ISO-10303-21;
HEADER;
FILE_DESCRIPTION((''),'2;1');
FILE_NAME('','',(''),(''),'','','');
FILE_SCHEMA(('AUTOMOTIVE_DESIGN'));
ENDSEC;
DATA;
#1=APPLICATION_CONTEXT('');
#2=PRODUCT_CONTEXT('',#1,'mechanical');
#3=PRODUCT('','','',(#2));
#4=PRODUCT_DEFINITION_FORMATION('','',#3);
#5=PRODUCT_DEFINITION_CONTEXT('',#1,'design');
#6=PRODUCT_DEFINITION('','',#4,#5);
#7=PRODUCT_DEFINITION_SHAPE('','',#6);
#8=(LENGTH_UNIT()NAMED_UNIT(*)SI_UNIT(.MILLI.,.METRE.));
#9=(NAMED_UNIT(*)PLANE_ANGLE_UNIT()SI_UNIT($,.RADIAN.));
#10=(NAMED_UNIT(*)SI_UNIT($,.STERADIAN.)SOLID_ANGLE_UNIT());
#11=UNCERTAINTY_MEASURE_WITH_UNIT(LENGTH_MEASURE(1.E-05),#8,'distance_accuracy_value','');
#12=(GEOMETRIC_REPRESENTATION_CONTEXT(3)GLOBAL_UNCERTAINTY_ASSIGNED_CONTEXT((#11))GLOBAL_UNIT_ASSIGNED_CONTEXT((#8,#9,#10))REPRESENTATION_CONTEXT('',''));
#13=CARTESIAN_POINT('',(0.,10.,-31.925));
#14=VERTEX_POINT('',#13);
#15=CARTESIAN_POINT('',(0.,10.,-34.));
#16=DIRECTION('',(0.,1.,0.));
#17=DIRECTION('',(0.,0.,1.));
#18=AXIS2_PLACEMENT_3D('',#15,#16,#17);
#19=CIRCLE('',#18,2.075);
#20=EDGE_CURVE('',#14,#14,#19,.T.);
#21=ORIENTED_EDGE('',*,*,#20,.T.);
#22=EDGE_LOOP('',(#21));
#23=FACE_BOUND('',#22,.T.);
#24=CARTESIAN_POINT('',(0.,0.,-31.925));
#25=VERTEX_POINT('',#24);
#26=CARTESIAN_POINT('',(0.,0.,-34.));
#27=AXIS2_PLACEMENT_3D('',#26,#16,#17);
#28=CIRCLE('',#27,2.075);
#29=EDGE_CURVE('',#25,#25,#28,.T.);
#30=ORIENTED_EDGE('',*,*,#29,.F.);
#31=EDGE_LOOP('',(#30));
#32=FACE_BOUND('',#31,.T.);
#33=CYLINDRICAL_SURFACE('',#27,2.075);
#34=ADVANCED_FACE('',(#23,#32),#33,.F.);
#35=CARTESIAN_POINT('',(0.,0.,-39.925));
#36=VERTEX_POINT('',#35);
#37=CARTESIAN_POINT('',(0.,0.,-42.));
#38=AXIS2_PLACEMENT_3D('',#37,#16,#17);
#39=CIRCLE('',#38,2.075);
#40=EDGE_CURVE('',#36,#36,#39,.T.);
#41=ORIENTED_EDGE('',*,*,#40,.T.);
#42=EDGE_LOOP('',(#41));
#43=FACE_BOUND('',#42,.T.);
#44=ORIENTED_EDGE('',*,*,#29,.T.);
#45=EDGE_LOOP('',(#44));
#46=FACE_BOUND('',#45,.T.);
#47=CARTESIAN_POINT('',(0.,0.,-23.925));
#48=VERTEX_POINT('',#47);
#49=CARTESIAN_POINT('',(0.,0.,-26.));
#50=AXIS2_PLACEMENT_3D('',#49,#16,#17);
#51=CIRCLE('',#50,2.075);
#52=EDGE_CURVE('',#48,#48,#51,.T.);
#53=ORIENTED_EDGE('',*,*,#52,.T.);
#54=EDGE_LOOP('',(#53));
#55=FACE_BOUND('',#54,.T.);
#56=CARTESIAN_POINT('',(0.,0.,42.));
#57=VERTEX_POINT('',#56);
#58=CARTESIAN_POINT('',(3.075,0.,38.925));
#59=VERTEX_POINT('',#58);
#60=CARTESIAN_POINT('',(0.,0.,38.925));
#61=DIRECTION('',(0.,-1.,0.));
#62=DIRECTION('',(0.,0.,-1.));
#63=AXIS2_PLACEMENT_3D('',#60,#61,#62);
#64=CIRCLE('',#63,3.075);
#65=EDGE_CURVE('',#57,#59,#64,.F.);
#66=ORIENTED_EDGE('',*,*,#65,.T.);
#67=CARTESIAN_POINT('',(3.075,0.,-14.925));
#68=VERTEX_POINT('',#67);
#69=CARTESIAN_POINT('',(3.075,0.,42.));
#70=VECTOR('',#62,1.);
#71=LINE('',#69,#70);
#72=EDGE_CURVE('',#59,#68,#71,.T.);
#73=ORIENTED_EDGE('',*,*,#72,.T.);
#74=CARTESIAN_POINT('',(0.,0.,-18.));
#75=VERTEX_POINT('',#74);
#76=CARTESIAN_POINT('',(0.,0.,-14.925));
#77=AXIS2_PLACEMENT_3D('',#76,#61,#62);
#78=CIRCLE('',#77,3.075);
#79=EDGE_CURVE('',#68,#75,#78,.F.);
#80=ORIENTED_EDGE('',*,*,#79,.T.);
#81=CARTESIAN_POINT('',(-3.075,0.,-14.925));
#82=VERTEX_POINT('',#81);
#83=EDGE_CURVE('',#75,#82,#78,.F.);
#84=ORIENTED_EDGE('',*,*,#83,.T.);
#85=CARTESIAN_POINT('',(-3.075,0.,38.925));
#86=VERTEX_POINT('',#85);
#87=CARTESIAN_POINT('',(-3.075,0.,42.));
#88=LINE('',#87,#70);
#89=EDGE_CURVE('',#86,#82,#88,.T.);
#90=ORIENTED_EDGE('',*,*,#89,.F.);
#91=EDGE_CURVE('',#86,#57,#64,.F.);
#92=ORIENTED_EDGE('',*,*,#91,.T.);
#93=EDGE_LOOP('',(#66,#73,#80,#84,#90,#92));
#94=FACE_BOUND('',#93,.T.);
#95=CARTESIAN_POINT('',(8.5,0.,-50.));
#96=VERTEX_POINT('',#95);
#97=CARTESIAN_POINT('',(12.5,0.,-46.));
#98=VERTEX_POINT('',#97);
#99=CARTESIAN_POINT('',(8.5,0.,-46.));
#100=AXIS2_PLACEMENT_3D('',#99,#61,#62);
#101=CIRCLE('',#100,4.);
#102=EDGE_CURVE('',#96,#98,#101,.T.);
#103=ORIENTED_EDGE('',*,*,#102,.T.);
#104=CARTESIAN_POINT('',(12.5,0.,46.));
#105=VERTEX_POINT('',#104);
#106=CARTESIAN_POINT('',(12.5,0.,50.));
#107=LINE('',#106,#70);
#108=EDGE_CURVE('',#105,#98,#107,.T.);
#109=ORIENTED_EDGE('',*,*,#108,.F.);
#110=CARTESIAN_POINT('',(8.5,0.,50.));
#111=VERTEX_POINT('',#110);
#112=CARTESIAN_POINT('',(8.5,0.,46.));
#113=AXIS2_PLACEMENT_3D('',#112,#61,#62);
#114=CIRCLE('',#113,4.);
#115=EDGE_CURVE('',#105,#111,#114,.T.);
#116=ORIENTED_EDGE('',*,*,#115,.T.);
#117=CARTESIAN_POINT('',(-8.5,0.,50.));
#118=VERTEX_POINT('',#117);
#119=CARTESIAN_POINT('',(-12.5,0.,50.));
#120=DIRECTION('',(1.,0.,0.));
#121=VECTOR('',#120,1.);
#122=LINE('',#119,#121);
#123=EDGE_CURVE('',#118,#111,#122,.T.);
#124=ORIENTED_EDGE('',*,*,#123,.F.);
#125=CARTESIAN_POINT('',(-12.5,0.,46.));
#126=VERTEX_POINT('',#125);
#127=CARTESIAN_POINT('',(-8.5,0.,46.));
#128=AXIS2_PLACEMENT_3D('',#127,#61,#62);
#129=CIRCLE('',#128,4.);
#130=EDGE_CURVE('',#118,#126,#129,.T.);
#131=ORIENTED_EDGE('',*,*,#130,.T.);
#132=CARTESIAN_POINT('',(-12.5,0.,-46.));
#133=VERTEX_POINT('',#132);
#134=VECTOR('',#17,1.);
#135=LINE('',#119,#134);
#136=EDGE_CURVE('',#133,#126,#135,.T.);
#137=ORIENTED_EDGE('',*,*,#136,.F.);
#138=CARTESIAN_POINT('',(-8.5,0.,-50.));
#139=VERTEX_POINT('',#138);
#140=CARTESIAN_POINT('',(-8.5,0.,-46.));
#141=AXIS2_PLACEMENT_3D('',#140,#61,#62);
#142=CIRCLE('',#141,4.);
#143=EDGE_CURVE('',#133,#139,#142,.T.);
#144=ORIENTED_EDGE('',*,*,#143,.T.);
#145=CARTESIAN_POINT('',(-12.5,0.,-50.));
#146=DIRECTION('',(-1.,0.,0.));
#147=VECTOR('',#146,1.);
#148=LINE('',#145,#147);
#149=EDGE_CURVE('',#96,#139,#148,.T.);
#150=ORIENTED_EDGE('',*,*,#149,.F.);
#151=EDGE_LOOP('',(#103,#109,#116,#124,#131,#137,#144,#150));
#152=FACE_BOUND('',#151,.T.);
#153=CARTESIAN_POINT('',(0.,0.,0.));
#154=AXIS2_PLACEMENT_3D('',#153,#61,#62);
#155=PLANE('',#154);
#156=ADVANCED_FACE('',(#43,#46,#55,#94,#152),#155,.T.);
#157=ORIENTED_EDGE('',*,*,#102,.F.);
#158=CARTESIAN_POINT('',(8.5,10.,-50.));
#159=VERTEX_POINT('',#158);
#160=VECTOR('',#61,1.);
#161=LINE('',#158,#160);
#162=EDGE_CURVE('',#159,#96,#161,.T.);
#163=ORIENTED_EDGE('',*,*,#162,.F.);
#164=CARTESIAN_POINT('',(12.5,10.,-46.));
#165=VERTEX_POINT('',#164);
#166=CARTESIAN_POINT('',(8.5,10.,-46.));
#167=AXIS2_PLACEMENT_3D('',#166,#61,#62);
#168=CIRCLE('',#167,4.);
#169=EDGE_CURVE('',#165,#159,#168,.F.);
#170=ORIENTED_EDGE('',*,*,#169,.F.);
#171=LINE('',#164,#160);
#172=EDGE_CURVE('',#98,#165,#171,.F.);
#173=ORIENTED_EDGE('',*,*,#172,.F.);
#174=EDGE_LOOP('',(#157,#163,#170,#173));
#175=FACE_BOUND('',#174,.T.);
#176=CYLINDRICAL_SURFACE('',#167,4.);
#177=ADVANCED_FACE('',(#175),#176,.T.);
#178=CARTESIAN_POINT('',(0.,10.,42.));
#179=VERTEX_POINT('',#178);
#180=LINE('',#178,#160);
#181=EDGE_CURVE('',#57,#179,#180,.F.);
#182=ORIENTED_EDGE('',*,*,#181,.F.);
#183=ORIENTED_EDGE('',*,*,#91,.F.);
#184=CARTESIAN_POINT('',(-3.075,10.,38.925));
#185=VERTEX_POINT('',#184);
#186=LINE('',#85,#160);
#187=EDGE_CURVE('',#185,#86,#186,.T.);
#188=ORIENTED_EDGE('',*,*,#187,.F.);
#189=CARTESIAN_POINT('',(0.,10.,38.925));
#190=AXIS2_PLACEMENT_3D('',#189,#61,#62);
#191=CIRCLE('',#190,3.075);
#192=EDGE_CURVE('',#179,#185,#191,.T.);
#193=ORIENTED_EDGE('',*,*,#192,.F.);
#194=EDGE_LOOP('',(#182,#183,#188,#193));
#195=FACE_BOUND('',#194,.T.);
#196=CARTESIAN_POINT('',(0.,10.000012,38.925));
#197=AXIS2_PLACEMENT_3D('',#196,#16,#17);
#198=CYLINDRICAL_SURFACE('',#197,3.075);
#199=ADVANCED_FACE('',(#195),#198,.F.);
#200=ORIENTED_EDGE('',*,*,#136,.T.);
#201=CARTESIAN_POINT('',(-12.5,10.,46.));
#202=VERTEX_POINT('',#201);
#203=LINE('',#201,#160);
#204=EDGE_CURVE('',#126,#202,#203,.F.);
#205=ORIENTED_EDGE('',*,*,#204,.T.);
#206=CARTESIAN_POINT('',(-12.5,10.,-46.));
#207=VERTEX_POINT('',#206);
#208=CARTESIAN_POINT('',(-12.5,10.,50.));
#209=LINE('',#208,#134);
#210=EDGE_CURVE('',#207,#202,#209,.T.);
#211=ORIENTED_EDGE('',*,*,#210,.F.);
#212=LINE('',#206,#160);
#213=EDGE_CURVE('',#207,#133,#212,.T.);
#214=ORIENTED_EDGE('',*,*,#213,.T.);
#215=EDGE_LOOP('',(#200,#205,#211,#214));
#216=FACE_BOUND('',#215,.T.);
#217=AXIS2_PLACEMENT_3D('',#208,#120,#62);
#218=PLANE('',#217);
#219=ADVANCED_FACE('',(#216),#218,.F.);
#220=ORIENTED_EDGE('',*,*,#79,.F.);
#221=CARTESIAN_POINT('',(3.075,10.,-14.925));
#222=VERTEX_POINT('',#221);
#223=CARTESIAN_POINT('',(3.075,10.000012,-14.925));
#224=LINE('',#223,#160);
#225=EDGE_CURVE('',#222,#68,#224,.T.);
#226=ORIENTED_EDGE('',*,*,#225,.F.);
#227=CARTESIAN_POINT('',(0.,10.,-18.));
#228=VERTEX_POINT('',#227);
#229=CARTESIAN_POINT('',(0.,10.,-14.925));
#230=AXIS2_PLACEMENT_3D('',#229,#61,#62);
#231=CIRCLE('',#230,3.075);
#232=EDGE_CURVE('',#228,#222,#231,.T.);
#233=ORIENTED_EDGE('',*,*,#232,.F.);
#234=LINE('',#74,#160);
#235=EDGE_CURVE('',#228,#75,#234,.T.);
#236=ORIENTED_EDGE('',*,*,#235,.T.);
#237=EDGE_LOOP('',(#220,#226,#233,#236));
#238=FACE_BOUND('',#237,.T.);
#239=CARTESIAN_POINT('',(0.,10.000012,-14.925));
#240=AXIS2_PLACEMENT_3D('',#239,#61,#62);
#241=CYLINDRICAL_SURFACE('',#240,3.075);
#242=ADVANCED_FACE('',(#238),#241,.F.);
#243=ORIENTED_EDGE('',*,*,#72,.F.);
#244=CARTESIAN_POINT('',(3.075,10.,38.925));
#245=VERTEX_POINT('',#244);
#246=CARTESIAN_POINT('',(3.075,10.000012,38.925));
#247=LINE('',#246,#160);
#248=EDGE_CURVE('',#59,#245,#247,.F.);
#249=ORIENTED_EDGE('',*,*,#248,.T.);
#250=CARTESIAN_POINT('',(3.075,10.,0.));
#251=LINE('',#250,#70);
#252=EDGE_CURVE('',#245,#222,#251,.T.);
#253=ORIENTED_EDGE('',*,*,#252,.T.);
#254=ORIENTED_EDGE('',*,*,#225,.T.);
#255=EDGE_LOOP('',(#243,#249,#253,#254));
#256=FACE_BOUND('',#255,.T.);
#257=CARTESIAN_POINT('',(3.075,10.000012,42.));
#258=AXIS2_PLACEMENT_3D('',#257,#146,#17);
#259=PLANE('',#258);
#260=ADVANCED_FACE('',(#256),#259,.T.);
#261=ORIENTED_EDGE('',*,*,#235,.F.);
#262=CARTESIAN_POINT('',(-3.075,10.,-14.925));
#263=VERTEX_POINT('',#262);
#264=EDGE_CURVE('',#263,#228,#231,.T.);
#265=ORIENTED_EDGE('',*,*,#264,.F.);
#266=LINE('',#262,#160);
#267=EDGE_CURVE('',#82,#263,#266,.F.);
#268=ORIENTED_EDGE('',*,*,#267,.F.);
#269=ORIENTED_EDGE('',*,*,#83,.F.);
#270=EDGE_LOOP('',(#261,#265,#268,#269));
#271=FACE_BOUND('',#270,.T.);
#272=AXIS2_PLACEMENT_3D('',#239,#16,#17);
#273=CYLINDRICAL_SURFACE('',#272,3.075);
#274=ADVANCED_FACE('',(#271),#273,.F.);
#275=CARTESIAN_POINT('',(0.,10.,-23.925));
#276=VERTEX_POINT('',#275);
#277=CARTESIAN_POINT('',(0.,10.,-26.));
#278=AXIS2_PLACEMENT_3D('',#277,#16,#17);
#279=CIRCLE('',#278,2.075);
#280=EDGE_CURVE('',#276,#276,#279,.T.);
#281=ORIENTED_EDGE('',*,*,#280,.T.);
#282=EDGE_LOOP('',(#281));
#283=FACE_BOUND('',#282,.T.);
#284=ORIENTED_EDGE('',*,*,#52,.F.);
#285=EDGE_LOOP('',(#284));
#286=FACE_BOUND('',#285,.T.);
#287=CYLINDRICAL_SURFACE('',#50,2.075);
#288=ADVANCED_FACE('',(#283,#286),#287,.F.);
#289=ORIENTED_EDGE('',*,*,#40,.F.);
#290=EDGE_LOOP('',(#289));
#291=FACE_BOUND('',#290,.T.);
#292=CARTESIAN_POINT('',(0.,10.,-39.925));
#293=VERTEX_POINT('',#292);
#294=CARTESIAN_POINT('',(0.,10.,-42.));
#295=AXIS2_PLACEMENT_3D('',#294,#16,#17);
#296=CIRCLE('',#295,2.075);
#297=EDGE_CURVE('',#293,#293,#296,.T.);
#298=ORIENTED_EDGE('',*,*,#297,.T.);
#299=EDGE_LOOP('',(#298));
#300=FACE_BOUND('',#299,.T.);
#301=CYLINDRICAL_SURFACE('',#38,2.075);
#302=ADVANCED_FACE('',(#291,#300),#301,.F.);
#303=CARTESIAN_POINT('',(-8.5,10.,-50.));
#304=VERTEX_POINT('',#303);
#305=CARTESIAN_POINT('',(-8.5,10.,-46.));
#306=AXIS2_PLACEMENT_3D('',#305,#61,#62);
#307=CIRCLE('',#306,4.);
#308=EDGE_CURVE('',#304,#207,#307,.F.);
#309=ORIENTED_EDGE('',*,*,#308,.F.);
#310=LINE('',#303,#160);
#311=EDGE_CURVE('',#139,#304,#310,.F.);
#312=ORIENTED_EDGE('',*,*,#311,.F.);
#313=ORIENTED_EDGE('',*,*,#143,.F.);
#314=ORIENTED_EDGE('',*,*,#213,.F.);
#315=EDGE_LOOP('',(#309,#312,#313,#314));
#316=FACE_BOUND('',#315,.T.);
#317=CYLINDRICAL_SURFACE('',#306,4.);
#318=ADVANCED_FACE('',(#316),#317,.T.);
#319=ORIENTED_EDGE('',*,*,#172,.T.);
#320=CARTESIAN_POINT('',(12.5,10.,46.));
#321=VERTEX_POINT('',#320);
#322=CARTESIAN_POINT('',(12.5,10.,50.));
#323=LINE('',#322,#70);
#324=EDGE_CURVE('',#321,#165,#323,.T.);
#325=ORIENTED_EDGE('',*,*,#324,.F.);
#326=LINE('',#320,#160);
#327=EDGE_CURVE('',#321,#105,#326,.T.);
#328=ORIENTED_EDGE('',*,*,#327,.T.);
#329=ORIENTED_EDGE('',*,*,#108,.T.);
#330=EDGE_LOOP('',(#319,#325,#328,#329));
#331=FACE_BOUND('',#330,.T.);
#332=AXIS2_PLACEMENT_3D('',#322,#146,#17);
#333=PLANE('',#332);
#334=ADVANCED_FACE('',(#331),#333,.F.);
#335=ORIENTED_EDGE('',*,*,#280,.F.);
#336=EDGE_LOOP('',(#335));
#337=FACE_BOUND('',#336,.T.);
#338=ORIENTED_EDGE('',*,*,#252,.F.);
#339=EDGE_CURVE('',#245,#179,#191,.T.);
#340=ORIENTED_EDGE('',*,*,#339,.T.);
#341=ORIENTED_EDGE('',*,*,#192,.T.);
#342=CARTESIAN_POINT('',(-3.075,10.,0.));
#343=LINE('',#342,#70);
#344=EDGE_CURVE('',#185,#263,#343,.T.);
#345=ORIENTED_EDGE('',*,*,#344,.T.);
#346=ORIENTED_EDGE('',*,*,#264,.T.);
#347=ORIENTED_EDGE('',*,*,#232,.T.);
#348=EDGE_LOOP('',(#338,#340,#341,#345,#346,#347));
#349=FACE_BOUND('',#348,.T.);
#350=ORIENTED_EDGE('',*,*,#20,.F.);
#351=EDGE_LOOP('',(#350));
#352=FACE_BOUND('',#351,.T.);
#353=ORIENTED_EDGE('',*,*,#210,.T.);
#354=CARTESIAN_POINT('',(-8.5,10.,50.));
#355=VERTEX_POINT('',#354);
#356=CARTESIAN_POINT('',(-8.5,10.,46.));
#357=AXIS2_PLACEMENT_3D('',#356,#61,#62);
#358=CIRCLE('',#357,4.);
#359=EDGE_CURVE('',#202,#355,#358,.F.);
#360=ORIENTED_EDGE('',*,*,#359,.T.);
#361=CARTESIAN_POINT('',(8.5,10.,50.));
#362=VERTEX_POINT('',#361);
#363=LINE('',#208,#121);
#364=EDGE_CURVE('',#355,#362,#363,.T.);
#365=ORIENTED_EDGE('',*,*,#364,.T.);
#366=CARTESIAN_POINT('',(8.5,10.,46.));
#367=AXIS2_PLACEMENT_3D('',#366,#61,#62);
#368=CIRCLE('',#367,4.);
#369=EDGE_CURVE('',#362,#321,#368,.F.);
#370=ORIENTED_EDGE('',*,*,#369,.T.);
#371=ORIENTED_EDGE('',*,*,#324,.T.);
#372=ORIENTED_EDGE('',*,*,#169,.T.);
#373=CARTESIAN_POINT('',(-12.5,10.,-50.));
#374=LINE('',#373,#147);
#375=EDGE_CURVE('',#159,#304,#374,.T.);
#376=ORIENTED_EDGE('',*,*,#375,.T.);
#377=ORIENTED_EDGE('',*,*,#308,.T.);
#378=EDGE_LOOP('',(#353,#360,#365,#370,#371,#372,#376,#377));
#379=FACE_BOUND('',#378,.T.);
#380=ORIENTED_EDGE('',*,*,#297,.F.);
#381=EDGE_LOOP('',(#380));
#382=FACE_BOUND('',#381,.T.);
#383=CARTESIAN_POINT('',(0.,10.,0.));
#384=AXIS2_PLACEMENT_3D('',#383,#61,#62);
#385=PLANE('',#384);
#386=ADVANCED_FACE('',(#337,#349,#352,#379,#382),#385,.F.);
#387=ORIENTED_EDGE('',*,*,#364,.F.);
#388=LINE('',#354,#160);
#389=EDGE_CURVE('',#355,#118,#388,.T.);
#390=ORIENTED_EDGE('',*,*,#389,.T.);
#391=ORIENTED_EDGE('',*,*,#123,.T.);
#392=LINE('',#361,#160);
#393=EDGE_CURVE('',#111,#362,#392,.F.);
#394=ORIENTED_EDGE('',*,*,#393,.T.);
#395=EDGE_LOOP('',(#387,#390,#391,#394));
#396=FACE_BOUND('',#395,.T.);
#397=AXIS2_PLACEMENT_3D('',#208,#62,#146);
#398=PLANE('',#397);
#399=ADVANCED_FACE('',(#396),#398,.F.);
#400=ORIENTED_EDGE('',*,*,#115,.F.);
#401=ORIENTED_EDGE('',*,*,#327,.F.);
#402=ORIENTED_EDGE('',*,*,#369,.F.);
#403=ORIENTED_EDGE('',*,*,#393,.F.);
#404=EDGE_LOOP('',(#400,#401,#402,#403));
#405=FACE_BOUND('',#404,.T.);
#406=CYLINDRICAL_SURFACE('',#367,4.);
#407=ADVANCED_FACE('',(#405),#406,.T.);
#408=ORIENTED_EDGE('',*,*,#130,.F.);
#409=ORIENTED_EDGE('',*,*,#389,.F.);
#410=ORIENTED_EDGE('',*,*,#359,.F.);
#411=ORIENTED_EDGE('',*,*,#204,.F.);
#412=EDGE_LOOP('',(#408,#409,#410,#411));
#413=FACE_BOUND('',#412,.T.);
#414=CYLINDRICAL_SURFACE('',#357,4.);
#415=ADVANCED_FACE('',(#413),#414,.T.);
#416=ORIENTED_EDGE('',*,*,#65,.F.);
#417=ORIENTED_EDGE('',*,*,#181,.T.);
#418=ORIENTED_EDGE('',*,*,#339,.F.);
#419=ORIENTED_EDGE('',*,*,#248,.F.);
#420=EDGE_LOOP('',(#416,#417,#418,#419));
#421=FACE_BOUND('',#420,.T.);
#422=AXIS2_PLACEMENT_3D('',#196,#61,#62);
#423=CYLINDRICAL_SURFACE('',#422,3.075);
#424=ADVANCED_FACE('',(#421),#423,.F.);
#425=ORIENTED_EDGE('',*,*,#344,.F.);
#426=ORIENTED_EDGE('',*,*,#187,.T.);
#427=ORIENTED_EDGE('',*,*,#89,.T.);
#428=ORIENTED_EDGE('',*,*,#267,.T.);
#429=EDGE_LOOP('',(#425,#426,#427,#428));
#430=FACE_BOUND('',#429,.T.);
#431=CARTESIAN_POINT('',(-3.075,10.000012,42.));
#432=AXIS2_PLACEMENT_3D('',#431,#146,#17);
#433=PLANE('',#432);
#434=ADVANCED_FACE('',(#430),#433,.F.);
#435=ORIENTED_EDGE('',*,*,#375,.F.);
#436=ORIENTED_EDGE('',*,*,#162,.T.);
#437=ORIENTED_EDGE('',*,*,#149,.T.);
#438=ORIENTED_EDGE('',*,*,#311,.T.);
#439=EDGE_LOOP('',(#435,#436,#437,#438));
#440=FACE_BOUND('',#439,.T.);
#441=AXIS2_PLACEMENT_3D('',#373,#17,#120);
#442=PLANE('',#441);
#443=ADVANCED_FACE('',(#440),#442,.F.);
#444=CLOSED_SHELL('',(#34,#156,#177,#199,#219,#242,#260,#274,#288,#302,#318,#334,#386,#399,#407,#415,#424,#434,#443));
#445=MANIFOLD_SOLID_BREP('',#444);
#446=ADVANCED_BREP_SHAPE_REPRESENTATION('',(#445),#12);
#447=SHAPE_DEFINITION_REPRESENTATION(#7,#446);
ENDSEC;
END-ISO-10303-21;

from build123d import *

# Parameters (mm, degrees)
SKETCH1_W                    = 25
SKETCH1_H                    = 100
BOSS_EXTRUDE1_DEPTH          = 10
CUT_EXTRUDE_THIN2_DEPTH      = 53.5
CUT_EXTRUDE_THIN2_DEPTH_BACK = 10
SKETCH3_W                    = 6.15
SKETCH3_H                    = 60
FILLET2_R                    = 3.075
FILLET3_R                    = 4
SKETCH4_R                    = 2.075
CUT_EXTRUDE1_DEPTH           = 53.5
LPATTERN1_COUNT              = 3
LPATTERN1_PITCH              = 8


with BuildPart() as part:
    # Sketch1 → Boss-Extrude1 (new body)
    with BuildSketch(Plane(origin=(0, 0, 0), x_dir=(1, 0, 0), z_dir=(0, 1, 0))):
        Rectangle(SKETCH1_W, SKETCH1_H)
    extrude(amount=BOSS_EXTRUDE1_DEPTH)

    # Sketch3 → Cut-Extrude-Thin2 (cut, two sides: drawn at the far end of the back side and taken through both)
    with BuildSketch(Plane(origin=(0, 10, 0), x_dir=(1, 0, 0), z_dir=(0, 1, 0)).offset(-CUT_EXTRUDE_THIN2_DEPTH_BACK)):
        with Locations((0, -12)):
            Rectangle(SKETCH3_W, SKETCH3_H)
    extrude(amount=CUT_EXTRUDE_THIN2_DEPTH + CUT_EXTRUDE_THIN2_DEPTH_BACK, mode=Mode.SUBTRACT)

    # Fillet2
    fillet2_edges = [part.edges().sort_by_distance(p)[0] for p in [
        (3.075, 5, -18),
        (-3.075, 5, -18),
        (3.075, 5, 42),
        (-3.075, 5, 42),
    ]]
    fillet(fillet2_edges, radius=FILLET2_R - 0.0001)  # a hair under: the kernel refuses the full size

    # Fillet3
    fillet3_edges = [part.edges().sort_by_distance(p)[0] for p in [
        (12.5, 5, 50),
        (-12.5, 5, 50),
        (-12.5, 5, -50),
        (12.5, 5, -50),
    ]]
    fillet(fillet3_edges, radius=FILLET3_R)

    # Sketch4 → Cut-Extrude1 (cut, through all)
    with BuildSketch(Plane(origin=(0, 10, 0), x_dir=(1, 0, 0), z_dir=(0, 1, 0))):
        with Locations(Location((0, 42, 0), (0, 0, 270))):
            Circle(SKETCH4_R)
    cut_extrude1 = extrude(amount=-CUT_EXTRUDE1_DEPTH, mode=Mode.SUBTRACT)

    # LPattern1: Cut-Extrude1 ×3
    with Locations(*[(0, 0, i * LPATTERN1_PITCH) for i in range(1, LPATTERN1_COUNT)]):
        add(cut_extrude1, mode=Mode.SUBTRACT)


solid = part.part
